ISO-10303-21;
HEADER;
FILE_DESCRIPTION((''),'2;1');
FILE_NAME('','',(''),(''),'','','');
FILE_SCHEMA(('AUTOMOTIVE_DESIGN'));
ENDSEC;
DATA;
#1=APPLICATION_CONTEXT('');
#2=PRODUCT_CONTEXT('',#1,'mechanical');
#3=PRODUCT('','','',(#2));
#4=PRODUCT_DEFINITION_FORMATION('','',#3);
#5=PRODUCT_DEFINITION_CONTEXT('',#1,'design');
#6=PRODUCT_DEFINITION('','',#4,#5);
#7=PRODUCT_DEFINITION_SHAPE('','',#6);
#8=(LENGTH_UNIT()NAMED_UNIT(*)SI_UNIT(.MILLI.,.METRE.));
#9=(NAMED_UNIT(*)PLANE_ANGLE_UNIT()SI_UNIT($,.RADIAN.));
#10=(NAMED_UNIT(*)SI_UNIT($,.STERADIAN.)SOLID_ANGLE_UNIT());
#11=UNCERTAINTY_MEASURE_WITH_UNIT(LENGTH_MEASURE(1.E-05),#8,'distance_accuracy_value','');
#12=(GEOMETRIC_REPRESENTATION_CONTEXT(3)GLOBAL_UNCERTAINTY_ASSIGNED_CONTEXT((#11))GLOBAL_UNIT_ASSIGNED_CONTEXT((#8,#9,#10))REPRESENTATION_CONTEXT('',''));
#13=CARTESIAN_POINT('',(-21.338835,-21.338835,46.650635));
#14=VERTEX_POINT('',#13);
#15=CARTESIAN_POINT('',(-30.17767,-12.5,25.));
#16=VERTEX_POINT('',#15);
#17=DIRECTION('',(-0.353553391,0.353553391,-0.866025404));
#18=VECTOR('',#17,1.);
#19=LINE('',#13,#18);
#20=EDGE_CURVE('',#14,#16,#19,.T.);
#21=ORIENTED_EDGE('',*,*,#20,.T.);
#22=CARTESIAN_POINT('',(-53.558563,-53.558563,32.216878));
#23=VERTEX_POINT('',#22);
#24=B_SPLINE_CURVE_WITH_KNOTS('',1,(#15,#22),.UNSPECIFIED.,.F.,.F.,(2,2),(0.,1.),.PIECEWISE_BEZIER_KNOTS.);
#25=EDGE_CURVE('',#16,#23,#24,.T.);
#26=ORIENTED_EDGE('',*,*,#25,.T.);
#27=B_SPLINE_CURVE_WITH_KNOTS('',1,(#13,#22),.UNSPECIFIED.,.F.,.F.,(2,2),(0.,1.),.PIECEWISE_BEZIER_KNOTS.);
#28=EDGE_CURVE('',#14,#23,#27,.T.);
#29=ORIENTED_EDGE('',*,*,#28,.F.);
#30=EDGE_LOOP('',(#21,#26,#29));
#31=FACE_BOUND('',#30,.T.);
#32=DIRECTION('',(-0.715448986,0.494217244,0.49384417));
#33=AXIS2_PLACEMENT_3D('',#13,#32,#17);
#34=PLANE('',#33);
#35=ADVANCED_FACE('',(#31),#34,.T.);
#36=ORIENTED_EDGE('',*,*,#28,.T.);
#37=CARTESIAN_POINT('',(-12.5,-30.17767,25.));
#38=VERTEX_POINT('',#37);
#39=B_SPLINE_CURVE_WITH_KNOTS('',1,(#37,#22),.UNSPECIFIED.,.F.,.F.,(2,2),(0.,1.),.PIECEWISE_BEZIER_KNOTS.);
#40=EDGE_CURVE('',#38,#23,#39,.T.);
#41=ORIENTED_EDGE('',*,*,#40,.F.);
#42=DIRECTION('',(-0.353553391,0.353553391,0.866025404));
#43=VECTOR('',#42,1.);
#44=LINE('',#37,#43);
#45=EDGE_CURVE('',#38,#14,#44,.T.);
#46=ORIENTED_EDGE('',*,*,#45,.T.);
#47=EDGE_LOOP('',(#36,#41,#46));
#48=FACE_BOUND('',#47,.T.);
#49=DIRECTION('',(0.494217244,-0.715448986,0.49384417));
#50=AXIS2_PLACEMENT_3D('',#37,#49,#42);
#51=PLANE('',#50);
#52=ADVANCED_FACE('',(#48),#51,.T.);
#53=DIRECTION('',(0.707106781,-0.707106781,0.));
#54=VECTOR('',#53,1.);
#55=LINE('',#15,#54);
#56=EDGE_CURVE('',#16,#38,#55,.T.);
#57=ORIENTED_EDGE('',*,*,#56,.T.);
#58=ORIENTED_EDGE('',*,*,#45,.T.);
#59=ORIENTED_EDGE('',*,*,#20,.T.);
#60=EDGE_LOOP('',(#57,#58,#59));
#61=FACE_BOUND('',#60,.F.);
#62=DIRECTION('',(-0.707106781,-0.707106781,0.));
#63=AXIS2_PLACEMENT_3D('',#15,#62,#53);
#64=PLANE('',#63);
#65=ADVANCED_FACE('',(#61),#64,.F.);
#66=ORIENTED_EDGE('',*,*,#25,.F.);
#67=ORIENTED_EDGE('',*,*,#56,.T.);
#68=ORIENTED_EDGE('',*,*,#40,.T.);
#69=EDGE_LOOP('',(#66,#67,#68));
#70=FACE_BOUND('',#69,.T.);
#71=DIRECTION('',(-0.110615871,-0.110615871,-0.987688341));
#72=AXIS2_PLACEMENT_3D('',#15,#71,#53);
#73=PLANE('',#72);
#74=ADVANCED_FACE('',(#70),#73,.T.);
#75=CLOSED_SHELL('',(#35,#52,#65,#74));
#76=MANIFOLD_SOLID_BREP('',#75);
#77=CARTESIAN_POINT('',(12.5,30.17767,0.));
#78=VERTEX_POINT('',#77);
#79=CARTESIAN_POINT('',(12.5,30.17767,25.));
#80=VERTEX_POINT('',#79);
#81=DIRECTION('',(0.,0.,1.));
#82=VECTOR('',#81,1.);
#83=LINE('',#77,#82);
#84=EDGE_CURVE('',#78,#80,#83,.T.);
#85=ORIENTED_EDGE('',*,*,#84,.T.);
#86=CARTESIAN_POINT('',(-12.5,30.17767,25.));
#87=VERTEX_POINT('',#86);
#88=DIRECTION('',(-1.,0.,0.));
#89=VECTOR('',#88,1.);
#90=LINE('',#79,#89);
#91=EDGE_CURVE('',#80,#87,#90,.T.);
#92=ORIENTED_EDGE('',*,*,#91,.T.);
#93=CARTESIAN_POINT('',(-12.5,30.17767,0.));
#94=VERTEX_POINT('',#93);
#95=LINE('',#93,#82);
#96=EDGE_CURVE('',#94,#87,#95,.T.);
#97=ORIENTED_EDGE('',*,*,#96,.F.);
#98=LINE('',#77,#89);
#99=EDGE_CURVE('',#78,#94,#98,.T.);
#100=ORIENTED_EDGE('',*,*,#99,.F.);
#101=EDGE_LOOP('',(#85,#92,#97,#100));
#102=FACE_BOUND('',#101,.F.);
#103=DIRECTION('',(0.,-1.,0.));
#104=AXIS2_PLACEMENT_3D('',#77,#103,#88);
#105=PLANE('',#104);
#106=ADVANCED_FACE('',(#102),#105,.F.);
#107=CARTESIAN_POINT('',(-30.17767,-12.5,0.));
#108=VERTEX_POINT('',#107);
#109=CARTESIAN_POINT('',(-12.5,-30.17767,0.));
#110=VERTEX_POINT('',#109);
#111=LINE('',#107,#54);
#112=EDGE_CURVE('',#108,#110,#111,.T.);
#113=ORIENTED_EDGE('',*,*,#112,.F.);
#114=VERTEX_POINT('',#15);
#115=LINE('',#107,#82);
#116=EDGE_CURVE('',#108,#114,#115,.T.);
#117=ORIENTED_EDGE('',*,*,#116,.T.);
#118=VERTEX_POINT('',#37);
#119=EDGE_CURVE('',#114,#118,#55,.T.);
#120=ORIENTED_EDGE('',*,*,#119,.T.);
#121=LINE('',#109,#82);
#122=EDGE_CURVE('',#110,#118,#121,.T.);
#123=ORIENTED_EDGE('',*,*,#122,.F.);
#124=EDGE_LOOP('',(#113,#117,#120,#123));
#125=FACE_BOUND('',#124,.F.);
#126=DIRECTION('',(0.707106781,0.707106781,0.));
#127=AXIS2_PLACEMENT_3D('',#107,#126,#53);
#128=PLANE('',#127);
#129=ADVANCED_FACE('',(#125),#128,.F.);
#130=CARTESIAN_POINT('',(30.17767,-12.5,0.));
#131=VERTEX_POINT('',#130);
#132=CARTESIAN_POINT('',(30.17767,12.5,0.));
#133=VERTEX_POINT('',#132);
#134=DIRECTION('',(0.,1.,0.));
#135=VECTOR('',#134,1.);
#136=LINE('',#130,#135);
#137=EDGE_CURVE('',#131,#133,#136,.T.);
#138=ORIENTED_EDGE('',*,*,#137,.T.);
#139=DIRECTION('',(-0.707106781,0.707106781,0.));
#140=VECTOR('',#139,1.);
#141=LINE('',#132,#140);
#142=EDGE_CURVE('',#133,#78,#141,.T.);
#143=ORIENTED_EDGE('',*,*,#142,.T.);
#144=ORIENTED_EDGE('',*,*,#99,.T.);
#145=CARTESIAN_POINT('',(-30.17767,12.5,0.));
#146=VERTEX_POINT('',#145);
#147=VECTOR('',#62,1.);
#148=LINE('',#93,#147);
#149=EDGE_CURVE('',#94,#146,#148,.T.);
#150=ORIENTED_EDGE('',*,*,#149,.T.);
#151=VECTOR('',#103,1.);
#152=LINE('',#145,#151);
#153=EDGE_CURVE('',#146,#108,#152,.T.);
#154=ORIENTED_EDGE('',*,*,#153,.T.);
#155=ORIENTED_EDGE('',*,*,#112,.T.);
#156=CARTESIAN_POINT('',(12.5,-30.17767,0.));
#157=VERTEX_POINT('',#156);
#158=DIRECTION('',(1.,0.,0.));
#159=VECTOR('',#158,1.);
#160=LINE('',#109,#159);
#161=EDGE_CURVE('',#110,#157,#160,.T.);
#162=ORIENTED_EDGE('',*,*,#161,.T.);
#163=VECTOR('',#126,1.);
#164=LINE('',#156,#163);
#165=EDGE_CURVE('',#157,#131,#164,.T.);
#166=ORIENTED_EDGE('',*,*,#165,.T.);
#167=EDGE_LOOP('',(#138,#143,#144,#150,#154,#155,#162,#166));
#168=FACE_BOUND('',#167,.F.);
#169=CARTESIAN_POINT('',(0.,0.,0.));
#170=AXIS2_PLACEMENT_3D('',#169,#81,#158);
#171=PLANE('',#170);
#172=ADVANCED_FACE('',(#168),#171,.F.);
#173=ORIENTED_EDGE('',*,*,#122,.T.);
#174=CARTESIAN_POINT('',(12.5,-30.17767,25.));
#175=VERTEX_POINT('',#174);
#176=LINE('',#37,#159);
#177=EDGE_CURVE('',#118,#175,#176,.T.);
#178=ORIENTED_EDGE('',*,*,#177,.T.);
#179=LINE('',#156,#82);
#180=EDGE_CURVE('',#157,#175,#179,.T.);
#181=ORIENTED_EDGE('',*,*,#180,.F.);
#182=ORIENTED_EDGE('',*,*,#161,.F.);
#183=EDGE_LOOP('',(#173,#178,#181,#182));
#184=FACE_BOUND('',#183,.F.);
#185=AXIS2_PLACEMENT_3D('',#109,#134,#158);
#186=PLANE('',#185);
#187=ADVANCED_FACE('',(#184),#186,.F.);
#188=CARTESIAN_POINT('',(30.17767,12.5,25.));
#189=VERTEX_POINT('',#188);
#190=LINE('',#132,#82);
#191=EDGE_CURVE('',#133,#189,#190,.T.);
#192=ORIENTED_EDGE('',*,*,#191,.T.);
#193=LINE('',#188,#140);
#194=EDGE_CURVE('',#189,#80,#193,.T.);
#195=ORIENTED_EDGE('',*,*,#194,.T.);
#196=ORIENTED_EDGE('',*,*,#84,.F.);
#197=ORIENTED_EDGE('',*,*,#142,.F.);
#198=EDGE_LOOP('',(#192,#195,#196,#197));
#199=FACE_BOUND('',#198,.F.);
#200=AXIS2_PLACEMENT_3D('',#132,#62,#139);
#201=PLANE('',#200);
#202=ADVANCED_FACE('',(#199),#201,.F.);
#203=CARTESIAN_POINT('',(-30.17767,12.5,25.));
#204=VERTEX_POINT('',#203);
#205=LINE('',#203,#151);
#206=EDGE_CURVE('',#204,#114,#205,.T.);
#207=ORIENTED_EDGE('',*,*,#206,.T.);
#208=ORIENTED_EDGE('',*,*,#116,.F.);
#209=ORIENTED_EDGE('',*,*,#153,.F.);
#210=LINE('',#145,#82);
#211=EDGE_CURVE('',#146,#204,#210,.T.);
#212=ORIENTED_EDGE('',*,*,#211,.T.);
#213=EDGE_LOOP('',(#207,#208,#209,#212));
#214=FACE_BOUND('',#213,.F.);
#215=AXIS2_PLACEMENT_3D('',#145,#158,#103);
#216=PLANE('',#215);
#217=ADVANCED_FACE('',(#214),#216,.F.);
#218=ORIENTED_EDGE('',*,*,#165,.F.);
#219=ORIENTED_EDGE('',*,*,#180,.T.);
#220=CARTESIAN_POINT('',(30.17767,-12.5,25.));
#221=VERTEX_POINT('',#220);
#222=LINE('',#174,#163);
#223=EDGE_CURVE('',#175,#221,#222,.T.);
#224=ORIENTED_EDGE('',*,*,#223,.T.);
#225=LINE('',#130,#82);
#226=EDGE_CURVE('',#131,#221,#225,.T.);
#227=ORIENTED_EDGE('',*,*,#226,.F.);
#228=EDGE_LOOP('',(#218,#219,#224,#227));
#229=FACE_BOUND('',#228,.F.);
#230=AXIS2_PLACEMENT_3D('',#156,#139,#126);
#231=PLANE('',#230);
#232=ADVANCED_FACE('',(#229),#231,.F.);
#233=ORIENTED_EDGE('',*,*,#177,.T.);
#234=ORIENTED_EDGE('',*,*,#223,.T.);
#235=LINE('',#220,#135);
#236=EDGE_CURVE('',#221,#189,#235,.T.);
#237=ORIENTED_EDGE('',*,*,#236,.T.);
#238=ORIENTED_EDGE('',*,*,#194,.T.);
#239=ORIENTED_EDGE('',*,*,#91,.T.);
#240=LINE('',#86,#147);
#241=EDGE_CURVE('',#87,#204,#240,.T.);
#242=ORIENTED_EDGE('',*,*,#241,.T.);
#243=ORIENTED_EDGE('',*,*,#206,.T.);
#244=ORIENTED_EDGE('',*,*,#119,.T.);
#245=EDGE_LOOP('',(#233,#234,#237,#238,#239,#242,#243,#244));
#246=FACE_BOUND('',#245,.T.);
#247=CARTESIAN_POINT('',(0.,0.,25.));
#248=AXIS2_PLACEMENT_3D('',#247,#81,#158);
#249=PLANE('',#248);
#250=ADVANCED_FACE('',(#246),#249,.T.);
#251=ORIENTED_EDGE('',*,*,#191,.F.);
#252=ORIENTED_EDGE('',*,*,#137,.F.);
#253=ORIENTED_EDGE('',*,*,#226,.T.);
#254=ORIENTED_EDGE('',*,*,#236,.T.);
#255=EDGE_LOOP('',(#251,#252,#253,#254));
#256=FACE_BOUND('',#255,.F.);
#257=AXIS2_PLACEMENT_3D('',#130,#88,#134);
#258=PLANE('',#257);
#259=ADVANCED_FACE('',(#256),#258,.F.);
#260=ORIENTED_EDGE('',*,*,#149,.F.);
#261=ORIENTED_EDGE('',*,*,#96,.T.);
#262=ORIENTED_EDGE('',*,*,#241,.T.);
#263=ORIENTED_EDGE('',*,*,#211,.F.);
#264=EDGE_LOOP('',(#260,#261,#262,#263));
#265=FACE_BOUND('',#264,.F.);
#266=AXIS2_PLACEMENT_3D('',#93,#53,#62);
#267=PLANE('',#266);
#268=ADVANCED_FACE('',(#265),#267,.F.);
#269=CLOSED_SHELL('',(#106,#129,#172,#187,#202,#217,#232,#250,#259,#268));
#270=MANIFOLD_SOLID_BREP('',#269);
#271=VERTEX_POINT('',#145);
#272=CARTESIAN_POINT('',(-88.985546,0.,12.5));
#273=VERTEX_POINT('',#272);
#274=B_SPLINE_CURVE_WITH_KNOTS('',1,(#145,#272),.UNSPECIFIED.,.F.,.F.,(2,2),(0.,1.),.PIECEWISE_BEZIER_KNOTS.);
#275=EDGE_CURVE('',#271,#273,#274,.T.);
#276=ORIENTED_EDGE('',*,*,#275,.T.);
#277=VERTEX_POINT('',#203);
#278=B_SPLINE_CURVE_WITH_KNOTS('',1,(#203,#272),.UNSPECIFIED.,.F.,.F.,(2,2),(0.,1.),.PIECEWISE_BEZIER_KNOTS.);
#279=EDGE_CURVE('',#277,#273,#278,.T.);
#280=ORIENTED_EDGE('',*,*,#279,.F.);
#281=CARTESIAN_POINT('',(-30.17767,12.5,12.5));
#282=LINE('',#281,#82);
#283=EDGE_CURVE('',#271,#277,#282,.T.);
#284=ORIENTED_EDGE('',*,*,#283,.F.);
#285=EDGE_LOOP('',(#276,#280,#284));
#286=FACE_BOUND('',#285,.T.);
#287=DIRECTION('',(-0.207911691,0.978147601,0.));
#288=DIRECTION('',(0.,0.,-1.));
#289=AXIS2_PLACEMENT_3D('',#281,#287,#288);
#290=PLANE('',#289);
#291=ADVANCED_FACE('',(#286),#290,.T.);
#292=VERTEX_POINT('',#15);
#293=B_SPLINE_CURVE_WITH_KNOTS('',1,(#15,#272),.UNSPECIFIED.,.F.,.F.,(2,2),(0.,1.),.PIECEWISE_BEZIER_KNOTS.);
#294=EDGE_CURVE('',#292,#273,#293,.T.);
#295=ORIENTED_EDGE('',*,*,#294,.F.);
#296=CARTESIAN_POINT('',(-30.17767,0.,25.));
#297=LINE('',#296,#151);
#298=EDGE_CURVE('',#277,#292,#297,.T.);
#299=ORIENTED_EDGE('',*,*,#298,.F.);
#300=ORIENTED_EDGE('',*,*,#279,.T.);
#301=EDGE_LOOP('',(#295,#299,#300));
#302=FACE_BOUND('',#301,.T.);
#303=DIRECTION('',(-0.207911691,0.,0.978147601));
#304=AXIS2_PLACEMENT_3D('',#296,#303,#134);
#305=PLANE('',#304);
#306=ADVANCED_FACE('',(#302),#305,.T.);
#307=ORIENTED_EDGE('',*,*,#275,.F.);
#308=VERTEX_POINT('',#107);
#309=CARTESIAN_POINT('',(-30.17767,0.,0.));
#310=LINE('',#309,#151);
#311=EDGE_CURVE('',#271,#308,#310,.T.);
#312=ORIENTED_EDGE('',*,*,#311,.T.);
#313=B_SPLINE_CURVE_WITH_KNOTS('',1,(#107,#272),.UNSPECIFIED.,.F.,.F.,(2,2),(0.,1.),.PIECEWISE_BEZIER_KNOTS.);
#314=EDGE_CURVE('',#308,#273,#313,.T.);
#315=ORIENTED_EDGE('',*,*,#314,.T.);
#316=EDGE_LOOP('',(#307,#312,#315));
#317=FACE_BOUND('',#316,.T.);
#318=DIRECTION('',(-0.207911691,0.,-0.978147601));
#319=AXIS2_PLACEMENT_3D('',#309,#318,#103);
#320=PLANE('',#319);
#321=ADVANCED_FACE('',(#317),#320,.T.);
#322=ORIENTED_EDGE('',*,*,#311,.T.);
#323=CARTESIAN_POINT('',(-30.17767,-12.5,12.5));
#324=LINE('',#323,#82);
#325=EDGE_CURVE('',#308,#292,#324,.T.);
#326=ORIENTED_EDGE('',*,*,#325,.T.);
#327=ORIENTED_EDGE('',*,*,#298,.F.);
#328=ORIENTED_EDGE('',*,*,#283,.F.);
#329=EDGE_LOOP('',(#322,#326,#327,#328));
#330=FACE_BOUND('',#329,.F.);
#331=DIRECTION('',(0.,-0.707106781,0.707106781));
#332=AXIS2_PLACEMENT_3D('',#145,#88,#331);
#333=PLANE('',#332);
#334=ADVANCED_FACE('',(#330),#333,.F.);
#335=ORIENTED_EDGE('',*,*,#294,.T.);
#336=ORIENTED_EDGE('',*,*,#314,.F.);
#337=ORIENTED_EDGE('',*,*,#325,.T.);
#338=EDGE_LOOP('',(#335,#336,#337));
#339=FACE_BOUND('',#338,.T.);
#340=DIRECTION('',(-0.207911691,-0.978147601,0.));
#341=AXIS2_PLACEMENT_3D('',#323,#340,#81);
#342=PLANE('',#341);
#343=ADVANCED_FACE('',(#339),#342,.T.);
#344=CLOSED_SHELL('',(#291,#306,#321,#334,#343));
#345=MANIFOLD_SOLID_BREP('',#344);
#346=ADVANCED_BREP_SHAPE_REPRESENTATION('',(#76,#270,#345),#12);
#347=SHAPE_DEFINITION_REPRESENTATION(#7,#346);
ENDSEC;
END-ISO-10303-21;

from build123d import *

# Parameters (mm, degrees)
F1_DEPTH  = 25
F1_FACE_W = 25
F1_FACE_H = 25


# Not quite as in the source:
# - an extrude whose draft closes it to a point is written as a loft to that point


with BuildPart() as f1:
    # F0 (on Top) → F1 (new body)
    with BuildSketch(Plane.XY):
        Polygon((12.5, -30.1776695297), (30.1776695297, -12.5), (30.1776695297, 12.5), (12.5, 30.1776695297), (-12.5, 30.1776695297), (-30.1776695297, 12.5), (-30.1776695297, -12.5), (-12.5, -30.1776695297), align=None)
    extrude(amount=F1_DEPTH)


with BuildPart() as f2:
    # F1_face (on face) → F2 section 0
    with BuildSketch(Plane(origin=(-30.1776695297, 0, 12.5), x_dir=(0, -1, 0), z_dir=(-1, 0, 0)), mode=Mode.PRIVATE) as f2_s0:
        Rectangle(F1_FACE_W, F1_FACE_H)
    loft([f2_s0.sketch, Vertex(-88.9855458981, 0, 12.5)], ruled=True)


with BuildPart() as f4:
    # F3 (on face) → F4 section 0
    with BuildSketch(Plane(origin=(-21.3388347648, -21.3388347648, 0), x_dir=(0.7071067812, -0.7071067812, 0), z_dir=(-0.7071067812, -0.7071067812, 0)), mode=Mode.PRIVATE) as f4_s0:
        Polygon((-12.5, 25), (12.5, 25), (0, 46.6506350946), align=None)
    loft([f4_s0.sketch, Vertex(-53.5585630433, -53.5585630433, 32.2168783649)], ruled=True)


solid = Compound([f1.part, f2.part, f4.part])
